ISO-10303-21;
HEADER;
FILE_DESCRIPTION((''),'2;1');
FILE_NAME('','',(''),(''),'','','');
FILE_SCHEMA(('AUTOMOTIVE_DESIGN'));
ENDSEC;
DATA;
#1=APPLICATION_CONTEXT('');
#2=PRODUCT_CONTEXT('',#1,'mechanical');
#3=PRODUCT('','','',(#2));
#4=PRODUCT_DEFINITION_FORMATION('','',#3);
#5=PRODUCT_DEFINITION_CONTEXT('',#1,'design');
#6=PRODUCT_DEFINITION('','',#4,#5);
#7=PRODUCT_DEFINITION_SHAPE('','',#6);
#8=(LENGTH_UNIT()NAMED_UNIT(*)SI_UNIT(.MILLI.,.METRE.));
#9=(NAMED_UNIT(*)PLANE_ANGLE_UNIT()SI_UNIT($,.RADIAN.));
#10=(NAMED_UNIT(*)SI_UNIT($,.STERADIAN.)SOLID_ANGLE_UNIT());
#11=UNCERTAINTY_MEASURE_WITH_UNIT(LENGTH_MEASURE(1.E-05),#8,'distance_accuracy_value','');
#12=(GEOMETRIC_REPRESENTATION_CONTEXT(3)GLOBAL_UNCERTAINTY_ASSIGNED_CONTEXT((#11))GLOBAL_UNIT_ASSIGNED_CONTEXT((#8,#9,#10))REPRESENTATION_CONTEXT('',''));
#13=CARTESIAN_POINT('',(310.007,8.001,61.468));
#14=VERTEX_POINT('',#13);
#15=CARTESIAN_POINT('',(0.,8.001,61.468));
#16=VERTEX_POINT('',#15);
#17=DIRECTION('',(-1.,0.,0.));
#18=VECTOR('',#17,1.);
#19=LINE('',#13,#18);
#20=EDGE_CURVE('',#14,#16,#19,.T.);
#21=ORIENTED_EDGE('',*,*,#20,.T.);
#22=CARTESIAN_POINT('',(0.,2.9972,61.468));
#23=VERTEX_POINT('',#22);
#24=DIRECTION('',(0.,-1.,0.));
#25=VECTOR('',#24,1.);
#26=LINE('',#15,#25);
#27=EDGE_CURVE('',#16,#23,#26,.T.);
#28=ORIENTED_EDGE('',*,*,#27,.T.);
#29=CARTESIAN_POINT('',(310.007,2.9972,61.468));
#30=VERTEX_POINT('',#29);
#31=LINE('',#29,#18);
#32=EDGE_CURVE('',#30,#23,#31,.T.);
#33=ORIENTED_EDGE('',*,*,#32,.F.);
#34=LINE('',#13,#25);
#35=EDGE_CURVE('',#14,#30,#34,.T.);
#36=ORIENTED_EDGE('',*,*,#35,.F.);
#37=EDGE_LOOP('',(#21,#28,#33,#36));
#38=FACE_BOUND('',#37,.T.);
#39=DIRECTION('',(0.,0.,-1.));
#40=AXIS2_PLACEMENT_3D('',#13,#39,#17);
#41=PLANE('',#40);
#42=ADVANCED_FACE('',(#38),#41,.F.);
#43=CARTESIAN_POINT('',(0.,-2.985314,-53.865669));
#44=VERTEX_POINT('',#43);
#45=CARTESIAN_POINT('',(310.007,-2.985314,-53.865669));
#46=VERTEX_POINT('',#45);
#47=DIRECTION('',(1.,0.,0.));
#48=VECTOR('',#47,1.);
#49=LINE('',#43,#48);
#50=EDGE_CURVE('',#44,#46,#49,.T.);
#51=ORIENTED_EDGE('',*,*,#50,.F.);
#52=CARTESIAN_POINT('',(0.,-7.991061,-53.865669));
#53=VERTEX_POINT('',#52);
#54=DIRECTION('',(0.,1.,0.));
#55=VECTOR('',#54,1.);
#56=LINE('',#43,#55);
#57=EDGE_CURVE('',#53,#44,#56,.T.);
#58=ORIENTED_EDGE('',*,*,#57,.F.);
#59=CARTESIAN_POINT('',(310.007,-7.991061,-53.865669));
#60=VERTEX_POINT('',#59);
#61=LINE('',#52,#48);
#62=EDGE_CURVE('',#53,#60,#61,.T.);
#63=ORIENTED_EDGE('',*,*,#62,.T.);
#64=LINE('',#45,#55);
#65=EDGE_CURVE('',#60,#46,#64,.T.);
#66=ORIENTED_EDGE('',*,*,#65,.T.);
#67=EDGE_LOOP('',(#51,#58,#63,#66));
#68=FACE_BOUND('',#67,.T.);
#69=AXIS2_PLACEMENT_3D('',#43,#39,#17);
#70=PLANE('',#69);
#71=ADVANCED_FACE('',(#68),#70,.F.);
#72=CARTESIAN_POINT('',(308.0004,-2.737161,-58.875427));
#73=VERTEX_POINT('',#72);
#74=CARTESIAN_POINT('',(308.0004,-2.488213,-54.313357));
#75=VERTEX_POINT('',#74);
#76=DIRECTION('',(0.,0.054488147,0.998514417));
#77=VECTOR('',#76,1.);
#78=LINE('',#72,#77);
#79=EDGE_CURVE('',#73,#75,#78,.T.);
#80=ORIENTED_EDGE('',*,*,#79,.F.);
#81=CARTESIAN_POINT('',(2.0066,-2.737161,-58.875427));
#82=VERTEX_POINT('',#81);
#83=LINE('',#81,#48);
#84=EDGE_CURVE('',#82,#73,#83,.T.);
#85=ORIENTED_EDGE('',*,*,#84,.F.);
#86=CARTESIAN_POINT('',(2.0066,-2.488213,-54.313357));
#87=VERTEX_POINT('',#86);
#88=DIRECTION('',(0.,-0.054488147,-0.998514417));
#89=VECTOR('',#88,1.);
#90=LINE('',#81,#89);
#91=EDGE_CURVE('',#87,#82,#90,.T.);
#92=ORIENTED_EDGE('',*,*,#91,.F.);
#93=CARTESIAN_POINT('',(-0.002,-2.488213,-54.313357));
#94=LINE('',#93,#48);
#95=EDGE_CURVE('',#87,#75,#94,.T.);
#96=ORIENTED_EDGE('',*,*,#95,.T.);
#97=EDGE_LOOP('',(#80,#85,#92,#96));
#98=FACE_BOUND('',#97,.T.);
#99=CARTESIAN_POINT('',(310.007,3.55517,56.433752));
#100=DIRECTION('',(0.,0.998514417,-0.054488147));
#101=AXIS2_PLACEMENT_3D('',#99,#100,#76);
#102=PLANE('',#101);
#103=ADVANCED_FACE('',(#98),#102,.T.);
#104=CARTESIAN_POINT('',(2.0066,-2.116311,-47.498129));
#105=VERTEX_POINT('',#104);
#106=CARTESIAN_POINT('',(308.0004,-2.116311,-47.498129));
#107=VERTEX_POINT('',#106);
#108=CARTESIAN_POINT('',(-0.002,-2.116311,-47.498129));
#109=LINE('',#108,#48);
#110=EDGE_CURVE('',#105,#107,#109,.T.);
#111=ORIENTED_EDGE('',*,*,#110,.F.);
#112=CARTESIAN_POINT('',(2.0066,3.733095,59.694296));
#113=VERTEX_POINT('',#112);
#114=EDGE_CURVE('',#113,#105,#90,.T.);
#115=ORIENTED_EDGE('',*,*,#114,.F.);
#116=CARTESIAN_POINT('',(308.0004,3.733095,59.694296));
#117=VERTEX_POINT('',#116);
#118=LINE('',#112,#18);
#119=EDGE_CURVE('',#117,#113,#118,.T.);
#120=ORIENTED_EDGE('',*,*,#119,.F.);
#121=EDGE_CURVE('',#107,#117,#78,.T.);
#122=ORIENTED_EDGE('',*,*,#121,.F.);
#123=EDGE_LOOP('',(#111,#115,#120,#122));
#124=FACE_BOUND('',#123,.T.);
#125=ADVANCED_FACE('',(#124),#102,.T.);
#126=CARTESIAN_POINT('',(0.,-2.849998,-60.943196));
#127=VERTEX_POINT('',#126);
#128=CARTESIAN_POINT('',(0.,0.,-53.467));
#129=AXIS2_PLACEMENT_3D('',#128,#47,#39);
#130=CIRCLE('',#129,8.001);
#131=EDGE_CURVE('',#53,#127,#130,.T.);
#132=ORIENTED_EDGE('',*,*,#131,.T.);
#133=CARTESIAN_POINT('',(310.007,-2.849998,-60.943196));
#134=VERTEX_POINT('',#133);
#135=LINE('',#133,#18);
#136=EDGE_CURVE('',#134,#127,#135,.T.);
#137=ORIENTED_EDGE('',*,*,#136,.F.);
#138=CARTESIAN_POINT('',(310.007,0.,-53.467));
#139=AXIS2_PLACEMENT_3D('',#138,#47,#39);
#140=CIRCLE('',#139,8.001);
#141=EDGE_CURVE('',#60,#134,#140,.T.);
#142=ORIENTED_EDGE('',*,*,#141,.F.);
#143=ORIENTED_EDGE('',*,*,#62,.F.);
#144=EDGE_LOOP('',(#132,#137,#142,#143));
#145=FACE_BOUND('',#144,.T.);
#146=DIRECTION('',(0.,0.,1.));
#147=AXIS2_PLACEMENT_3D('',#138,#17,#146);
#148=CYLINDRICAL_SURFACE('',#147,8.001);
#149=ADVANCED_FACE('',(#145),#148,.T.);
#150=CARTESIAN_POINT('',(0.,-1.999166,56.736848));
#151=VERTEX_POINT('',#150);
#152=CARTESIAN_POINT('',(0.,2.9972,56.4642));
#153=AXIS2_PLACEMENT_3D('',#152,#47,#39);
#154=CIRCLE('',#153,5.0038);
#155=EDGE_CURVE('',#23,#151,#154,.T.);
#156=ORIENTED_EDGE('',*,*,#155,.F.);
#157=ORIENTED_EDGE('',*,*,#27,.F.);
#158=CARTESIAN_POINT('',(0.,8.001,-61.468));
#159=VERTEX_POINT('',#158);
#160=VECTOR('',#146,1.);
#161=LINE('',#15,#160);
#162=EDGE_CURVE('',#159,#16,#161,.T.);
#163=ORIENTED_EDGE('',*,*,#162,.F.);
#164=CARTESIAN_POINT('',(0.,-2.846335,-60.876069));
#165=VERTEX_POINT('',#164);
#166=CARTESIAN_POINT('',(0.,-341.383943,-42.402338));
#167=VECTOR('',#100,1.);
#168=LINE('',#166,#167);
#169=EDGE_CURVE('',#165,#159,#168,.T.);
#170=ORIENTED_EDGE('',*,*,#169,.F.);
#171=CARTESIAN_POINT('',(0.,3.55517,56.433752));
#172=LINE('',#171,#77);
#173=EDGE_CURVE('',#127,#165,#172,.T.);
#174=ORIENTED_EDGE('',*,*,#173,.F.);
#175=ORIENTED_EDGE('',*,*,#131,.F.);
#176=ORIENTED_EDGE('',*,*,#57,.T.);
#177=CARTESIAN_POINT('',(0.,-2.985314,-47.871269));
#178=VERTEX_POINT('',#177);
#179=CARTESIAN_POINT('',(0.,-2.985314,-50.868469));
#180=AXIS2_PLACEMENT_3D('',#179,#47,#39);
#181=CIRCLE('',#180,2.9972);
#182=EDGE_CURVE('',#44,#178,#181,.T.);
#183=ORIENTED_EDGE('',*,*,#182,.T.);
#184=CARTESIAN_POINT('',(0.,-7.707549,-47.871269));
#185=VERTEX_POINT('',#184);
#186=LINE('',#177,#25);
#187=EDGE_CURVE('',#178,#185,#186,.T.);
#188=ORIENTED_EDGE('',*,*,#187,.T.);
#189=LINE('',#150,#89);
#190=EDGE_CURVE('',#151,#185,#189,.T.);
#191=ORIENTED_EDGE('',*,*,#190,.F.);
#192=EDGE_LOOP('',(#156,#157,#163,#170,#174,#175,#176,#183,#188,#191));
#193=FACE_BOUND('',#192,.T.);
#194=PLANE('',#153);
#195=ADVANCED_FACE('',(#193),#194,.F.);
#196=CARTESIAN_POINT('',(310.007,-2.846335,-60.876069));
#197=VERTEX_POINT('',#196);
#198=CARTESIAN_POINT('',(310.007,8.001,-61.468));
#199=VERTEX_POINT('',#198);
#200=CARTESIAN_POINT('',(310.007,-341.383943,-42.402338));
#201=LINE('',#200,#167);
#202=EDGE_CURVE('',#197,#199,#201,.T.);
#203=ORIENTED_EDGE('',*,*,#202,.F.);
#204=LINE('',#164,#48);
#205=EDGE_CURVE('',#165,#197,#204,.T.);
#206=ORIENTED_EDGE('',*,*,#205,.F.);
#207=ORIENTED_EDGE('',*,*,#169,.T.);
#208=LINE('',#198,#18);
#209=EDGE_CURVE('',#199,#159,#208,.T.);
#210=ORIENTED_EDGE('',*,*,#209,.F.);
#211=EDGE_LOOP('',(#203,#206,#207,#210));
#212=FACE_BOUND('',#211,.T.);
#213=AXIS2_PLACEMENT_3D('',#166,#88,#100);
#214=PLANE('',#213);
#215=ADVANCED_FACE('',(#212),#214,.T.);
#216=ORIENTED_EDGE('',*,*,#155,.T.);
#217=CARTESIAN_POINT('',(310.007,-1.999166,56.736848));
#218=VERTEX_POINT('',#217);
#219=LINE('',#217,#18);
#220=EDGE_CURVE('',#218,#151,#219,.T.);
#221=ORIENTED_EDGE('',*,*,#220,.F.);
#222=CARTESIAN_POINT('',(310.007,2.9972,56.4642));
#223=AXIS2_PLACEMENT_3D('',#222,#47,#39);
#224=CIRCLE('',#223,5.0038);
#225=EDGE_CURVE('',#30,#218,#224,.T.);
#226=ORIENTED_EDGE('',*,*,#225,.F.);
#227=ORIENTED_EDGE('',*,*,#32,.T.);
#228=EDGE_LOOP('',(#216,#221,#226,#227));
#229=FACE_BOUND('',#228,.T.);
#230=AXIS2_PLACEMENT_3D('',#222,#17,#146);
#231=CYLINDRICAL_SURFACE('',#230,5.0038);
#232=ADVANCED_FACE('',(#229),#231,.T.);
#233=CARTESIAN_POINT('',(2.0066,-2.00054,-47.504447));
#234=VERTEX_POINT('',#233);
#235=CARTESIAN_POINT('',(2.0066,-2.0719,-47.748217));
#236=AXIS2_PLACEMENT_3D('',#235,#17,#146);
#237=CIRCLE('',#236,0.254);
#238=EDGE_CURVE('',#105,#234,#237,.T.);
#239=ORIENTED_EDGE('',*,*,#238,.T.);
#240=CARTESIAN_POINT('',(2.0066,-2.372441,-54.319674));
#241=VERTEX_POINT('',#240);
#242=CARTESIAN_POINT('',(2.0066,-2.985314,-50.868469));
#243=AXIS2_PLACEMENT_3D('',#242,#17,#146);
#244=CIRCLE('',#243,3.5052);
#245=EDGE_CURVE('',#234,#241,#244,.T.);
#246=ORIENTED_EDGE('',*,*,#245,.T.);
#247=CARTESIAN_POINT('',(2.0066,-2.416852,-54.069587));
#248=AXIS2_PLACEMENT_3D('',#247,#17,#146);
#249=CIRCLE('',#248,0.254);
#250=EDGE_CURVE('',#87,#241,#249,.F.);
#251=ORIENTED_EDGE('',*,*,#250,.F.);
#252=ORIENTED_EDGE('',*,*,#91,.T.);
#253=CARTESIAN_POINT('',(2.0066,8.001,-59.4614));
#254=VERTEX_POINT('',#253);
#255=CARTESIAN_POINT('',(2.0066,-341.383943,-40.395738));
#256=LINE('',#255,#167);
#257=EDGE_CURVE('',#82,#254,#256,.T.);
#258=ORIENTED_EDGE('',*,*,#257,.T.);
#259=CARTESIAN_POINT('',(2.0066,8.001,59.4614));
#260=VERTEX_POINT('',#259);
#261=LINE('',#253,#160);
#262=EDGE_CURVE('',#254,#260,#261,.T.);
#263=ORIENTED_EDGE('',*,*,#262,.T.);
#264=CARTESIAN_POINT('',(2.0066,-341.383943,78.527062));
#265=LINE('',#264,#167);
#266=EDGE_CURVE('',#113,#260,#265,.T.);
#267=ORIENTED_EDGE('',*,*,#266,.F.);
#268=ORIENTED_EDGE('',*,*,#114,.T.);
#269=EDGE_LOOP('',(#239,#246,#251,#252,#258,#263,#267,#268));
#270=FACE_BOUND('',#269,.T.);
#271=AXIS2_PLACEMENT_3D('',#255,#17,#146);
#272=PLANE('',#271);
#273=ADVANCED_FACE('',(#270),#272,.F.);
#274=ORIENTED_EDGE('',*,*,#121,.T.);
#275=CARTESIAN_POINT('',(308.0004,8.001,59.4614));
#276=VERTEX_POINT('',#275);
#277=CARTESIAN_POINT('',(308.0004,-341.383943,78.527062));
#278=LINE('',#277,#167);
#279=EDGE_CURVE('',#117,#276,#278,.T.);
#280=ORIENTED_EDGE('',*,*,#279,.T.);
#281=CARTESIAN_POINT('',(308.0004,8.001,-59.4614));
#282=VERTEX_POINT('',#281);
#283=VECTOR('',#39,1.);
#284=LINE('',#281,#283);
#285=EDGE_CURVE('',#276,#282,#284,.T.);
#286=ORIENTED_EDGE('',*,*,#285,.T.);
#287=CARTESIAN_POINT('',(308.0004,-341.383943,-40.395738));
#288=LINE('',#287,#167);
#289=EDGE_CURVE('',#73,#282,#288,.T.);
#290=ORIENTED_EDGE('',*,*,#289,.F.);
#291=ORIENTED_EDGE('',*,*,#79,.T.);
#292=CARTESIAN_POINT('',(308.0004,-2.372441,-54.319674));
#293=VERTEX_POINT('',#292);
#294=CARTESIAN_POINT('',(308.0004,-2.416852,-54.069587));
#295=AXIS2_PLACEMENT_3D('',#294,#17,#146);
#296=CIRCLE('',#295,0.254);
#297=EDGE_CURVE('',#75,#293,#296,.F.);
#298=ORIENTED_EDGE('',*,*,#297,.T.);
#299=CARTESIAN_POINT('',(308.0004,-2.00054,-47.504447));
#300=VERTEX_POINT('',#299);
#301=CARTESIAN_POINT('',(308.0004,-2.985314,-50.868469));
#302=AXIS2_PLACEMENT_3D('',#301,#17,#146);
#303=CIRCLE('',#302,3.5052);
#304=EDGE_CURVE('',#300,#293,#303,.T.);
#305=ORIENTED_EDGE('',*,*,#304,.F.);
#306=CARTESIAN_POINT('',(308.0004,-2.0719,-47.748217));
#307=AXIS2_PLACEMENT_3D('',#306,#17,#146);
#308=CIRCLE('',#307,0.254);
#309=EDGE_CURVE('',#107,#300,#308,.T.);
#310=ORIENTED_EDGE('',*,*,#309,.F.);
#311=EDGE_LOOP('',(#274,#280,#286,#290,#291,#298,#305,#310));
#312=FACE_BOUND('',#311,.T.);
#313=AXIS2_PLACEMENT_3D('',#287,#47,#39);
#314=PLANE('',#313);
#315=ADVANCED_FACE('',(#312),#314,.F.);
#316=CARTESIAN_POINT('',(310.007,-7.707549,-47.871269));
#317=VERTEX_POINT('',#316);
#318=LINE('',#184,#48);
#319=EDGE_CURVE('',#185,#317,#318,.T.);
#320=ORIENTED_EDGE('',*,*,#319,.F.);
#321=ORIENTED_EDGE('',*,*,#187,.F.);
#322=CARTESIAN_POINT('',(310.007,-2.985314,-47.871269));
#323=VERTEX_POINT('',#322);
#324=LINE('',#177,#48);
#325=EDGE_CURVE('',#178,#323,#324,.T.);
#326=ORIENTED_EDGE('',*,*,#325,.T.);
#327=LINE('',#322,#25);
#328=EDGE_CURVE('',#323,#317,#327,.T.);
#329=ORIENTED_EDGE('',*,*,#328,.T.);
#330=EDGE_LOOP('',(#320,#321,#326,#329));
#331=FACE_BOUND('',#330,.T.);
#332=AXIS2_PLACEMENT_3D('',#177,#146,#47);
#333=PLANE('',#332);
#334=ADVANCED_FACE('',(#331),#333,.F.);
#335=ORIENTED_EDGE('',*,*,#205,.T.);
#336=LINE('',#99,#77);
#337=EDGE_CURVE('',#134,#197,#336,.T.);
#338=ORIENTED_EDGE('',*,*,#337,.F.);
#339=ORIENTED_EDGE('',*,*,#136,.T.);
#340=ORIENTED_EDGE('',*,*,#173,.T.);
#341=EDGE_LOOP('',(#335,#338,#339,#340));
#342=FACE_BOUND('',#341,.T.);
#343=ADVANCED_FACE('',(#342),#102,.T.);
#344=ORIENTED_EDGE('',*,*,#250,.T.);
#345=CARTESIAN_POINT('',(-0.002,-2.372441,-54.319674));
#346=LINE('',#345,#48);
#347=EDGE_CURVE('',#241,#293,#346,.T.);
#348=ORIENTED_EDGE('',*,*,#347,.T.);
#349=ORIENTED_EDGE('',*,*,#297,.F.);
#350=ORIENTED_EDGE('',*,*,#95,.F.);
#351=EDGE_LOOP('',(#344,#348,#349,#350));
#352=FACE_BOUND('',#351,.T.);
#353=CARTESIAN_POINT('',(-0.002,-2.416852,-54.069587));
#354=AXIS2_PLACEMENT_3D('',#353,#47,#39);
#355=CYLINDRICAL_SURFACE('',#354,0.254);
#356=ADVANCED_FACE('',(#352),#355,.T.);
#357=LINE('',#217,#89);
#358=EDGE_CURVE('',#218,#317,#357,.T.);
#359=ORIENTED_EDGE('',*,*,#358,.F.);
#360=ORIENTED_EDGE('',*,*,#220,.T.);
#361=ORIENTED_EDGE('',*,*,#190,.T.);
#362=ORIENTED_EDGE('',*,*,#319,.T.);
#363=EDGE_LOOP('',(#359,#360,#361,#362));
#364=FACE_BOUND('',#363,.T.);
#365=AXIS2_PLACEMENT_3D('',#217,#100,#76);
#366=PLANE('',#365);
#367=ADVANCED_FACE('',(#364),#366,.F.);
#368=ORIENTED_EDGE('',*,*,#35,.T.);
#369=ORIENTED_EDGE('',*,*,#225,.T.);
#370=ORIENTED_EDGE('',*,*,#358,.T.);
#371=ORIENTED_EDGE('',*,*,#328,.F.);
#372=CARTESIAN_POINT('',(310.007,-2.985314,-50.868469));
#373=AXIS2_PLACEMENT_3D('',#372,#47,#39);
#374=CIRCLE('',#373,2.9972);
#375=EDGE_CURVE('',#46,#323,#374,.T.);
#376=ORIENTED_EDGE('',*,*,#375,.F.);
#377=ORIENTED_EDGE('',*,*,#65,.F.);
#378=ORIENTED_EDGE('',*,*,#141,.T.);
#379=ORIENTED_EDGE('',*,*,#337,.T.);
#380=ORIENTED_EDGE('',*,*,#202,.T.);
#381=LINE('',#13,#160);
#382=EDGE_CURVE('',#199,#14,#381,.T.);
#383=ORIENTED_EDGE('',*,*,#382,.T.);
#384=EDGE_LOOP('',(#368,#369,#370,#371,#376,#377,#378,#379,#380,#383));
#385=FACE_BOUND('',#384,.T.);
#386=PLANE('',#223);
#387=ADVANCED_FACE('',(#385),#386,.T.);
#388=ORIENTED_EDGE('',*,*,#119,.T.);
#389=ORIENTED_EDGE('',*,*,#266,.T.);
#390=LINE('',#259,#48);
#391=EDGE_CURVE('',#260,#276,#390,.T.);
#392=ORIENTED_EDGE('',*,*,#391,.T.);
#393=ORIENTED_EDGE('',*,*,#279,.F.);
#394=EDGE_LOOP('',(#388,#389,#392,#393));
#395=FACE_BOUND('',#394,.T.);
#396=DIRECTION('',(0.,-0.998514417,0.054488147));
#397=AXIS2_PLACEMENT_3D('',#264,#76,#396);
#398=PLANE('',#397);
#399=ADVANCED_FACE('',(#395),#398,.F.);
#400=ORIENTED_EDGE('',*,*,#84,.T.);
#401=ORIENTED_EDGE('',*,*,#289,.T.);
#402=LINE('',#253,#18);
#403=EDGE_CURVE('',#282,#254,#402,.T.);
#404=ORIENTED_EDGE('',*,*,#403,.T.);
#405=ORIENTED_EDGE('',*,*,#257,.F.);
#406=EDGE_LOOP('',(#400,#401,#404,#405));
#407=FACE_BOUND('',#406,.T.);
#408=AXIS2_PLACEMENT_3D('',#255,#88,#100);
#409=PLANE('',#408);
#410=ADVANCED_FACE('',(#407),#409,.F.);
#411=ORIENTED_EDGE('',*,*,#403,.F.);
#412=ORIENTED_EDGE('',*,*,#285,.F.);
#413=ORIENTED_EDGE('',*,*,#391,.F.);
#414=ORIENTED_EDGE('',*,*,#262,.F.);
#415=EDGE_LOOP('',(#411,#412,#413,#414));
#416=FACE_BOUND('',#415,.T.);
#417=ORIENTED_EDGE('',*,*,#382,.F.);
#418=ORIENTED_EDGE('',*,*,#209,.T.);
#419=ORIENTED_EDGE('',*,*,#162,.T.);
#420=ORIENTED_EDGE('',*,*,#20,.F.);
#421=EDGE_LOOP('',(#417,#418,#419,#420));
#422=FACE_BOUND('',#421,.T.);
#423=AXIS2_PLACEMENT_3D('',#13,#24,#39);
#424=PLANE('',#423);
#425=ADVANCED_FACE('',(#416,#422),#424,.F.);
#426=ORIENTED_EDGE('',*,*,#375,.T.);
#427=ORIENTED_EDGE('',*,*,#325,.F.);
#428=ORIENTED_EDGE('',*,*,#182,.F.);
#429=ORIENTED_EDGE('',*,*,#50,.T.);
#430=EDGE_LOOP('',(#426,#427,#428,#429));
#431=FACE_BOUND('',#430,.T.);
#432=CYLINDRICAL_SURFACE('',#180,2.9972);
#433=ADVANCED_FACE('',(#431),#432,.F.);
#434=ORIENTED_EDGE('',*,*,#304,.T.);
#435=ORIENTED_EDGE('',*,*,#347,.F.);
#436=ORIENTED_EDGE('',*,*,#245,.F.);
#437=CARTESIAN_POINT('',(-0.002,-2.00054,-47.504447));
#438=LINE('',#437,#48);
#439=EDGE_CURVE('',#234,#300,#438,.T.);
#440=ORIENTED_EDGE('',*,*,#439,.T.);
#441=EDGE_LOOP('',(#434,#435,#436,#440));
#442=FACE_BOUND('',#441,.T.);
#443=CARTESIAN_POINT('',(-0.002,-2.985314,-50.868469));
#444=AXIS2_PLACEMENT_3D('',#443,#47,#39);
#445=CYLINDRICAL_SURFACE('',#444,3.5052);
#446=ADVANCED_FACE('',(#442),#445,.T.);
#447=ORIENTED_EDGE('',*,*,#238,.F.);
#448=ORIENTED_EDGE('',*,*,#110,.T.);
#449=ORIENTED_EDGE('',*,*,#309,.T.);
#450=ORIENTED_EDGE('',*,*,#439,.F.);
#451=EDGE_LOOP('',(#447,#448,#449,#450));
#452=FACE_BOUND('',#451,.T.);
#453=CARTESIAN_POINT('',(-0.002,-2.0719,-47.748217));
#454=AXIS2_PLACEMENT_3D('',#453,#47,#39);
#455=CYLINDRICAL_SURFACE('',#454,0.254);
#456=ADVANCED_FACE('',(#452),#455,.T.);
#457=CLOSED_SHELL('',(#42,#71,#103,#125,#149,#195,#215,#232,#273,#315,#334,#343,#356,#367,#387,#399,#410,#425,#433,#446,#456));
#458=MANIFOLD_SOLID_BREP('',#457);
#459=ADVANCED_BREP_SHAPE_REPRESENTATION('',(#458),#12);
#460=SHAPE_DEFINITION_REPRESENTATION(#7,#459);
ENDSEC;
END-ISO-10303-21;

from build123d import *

# Parameters (mm, degrees)
SALIENTE_EXTRUIR1_DEPTH     = 310.007
CORTAR_EXTRUIR1_START       = 0.474917769
CORTAR_EXTRUIR1_OUTLINE_W   = 313
CORTAR_EXTRUIR1_OUTLINE_H   = 2.059275456
CORTAR_EXTRUIR1_OUTLINE_W_2 = 305.9938
CORTAR_EXTRUIR1_OUTLINE_H_2 = 118.74613036
CORTAR_EXTRUIR1_DEPTH       = 10.863473519
CORTAR_EXTRUIR2_DEPTH       = 317.143434336
SALIENTE_EXTRUIR2_REACH     = 316.176


# Read off the part's stored shape, not the designer's step: Cortar-Extruir1
with BuildPart() as part:
    # Croquis1 → Saliente-Extruir1 (new body)
    with BuildSketch(Plane(origin=(0, 0, 0), x_dir=(0, 0, -1), z_dir=(1, 0, 0))):
        with BuildLine():
            Line((-61.468, 8.001), (61.468, 8.001))
            Line((61.468, 8.001), (61.468, 0))
            ThreePointArc((61.468, 0), (58.968267477, -5.809652067), (53.031040334, -7.989113854))
            Line((53.031040334, -7.989113854), (-56.736847791, -1.999166442))
            ThreePointArc((-56.736847791, -1.999166442), (-60.09753796, -0.443275216), (-61.468, 2.9972))
            Line((-61.468, 2.9972), (-61.468, 8.001))
        make_face()
    extrude(amount=SALIENTE_EXTRUIR1_DEPTH)

    # Cortar-Extruir1 outline → Cortar-Extruir1 (cut)
    with BuildSketch(Plane(origin=(0, 0, 0), x_dir=(1, 0, 0), z_dir=(0, 0.9985144174273646, -0.054488147240394726)).offset(CORTAR_EXTRUIR1_START)):
        with Locations((155.5, 61.970362272)):
            Rectangle(CORTAR_EXTRUIR1_OUTLINE_W, CORTAR_EXTRUIR1_OUTLINE_H)
        with Locations((155.0035, -0.435959666)):
            Rectangle(CORTAR_EXTRUIR1_OUTLINE_W_2, CORTAR_EXTRUIR1_OUTLINE_H_2)
    extrude(amount=CORTAR_EXTRUIR1_DEPTH, mode=Mode.SUBTRACT)

    # Croquis3 → Cortar-Extruir2 (cut, through all)
    with BuildSketch(Plane(origin=(310.007, 0, 0), x_dir=(0, 0, -1), z_dir=(1, 0, 0))):
        with BuildLine():
            Line((47.871269455, -2.985313854), (47.871269455, -7.707549211))
            Line((47.871269455, -7.707549211), (53.031040334, -7.989113854))
            ThreePointArc((53.031040334, -7.989113854), (53.448329481, -8.000978216), (53.865669455, -7.991061486))
            Line((53.865669455, -7.991061486), (53.865669455, -2.985313854))
            ThreePointArc((53.865669455, -2.985313854), (50.868469455, 0.011886146), (47.871269455, -2.985313854))
        make_face()
    extrude(amount=-CORTAR_EXTRUIR2_DEPTH, mode=Mode.SUBTRACT)

    # Croquis4 → Saliente-Extruir2 (add, up to next)
    with BuildSketch(Plane.ZY.offset(-308.0004), mode=Mode.PRIVATE) as saliente_extruir2_sk1:
        with BuildLine():
            ThreePointArc((-54.319674223, -2.372441361), (-54.323209583, -2.4306924), (-54.313356663, -2.488212852))
            Line((-54.313356663, -2.488212852), (-53.819499619, -2.461263461))
            ThreePointArc((-53.819499619, -2.461263461), (-51.03178133, 0.007433558), (-47.991986492, -2.143260648))
            Line((-47.991986492, -2.143260648), (-47.498129447, -2.116311258))
            ThreePointArc((-47.498129447, -2.116311258), (-47.494594087, -2.058060218), (-47.504447006, -2.000539766))
            ThreePointArc((-47.504447006, -2.000539766), (-51.059461309, 0.514678882), (-54.319674223, -2.372441361))
        make_face()
    saliente_extruir2_tool1 = extrude(saliente_extruir2_sk1.sketch, amount=SALIENTE_EXTRUIR2_REACH, mode=Mode.PRIVATE) - part.part
    add(saliente_extruir2_tool1.solids().sort_by_distance((308.0004, 0.440165, -51.055395))[0])


solid = part.part
